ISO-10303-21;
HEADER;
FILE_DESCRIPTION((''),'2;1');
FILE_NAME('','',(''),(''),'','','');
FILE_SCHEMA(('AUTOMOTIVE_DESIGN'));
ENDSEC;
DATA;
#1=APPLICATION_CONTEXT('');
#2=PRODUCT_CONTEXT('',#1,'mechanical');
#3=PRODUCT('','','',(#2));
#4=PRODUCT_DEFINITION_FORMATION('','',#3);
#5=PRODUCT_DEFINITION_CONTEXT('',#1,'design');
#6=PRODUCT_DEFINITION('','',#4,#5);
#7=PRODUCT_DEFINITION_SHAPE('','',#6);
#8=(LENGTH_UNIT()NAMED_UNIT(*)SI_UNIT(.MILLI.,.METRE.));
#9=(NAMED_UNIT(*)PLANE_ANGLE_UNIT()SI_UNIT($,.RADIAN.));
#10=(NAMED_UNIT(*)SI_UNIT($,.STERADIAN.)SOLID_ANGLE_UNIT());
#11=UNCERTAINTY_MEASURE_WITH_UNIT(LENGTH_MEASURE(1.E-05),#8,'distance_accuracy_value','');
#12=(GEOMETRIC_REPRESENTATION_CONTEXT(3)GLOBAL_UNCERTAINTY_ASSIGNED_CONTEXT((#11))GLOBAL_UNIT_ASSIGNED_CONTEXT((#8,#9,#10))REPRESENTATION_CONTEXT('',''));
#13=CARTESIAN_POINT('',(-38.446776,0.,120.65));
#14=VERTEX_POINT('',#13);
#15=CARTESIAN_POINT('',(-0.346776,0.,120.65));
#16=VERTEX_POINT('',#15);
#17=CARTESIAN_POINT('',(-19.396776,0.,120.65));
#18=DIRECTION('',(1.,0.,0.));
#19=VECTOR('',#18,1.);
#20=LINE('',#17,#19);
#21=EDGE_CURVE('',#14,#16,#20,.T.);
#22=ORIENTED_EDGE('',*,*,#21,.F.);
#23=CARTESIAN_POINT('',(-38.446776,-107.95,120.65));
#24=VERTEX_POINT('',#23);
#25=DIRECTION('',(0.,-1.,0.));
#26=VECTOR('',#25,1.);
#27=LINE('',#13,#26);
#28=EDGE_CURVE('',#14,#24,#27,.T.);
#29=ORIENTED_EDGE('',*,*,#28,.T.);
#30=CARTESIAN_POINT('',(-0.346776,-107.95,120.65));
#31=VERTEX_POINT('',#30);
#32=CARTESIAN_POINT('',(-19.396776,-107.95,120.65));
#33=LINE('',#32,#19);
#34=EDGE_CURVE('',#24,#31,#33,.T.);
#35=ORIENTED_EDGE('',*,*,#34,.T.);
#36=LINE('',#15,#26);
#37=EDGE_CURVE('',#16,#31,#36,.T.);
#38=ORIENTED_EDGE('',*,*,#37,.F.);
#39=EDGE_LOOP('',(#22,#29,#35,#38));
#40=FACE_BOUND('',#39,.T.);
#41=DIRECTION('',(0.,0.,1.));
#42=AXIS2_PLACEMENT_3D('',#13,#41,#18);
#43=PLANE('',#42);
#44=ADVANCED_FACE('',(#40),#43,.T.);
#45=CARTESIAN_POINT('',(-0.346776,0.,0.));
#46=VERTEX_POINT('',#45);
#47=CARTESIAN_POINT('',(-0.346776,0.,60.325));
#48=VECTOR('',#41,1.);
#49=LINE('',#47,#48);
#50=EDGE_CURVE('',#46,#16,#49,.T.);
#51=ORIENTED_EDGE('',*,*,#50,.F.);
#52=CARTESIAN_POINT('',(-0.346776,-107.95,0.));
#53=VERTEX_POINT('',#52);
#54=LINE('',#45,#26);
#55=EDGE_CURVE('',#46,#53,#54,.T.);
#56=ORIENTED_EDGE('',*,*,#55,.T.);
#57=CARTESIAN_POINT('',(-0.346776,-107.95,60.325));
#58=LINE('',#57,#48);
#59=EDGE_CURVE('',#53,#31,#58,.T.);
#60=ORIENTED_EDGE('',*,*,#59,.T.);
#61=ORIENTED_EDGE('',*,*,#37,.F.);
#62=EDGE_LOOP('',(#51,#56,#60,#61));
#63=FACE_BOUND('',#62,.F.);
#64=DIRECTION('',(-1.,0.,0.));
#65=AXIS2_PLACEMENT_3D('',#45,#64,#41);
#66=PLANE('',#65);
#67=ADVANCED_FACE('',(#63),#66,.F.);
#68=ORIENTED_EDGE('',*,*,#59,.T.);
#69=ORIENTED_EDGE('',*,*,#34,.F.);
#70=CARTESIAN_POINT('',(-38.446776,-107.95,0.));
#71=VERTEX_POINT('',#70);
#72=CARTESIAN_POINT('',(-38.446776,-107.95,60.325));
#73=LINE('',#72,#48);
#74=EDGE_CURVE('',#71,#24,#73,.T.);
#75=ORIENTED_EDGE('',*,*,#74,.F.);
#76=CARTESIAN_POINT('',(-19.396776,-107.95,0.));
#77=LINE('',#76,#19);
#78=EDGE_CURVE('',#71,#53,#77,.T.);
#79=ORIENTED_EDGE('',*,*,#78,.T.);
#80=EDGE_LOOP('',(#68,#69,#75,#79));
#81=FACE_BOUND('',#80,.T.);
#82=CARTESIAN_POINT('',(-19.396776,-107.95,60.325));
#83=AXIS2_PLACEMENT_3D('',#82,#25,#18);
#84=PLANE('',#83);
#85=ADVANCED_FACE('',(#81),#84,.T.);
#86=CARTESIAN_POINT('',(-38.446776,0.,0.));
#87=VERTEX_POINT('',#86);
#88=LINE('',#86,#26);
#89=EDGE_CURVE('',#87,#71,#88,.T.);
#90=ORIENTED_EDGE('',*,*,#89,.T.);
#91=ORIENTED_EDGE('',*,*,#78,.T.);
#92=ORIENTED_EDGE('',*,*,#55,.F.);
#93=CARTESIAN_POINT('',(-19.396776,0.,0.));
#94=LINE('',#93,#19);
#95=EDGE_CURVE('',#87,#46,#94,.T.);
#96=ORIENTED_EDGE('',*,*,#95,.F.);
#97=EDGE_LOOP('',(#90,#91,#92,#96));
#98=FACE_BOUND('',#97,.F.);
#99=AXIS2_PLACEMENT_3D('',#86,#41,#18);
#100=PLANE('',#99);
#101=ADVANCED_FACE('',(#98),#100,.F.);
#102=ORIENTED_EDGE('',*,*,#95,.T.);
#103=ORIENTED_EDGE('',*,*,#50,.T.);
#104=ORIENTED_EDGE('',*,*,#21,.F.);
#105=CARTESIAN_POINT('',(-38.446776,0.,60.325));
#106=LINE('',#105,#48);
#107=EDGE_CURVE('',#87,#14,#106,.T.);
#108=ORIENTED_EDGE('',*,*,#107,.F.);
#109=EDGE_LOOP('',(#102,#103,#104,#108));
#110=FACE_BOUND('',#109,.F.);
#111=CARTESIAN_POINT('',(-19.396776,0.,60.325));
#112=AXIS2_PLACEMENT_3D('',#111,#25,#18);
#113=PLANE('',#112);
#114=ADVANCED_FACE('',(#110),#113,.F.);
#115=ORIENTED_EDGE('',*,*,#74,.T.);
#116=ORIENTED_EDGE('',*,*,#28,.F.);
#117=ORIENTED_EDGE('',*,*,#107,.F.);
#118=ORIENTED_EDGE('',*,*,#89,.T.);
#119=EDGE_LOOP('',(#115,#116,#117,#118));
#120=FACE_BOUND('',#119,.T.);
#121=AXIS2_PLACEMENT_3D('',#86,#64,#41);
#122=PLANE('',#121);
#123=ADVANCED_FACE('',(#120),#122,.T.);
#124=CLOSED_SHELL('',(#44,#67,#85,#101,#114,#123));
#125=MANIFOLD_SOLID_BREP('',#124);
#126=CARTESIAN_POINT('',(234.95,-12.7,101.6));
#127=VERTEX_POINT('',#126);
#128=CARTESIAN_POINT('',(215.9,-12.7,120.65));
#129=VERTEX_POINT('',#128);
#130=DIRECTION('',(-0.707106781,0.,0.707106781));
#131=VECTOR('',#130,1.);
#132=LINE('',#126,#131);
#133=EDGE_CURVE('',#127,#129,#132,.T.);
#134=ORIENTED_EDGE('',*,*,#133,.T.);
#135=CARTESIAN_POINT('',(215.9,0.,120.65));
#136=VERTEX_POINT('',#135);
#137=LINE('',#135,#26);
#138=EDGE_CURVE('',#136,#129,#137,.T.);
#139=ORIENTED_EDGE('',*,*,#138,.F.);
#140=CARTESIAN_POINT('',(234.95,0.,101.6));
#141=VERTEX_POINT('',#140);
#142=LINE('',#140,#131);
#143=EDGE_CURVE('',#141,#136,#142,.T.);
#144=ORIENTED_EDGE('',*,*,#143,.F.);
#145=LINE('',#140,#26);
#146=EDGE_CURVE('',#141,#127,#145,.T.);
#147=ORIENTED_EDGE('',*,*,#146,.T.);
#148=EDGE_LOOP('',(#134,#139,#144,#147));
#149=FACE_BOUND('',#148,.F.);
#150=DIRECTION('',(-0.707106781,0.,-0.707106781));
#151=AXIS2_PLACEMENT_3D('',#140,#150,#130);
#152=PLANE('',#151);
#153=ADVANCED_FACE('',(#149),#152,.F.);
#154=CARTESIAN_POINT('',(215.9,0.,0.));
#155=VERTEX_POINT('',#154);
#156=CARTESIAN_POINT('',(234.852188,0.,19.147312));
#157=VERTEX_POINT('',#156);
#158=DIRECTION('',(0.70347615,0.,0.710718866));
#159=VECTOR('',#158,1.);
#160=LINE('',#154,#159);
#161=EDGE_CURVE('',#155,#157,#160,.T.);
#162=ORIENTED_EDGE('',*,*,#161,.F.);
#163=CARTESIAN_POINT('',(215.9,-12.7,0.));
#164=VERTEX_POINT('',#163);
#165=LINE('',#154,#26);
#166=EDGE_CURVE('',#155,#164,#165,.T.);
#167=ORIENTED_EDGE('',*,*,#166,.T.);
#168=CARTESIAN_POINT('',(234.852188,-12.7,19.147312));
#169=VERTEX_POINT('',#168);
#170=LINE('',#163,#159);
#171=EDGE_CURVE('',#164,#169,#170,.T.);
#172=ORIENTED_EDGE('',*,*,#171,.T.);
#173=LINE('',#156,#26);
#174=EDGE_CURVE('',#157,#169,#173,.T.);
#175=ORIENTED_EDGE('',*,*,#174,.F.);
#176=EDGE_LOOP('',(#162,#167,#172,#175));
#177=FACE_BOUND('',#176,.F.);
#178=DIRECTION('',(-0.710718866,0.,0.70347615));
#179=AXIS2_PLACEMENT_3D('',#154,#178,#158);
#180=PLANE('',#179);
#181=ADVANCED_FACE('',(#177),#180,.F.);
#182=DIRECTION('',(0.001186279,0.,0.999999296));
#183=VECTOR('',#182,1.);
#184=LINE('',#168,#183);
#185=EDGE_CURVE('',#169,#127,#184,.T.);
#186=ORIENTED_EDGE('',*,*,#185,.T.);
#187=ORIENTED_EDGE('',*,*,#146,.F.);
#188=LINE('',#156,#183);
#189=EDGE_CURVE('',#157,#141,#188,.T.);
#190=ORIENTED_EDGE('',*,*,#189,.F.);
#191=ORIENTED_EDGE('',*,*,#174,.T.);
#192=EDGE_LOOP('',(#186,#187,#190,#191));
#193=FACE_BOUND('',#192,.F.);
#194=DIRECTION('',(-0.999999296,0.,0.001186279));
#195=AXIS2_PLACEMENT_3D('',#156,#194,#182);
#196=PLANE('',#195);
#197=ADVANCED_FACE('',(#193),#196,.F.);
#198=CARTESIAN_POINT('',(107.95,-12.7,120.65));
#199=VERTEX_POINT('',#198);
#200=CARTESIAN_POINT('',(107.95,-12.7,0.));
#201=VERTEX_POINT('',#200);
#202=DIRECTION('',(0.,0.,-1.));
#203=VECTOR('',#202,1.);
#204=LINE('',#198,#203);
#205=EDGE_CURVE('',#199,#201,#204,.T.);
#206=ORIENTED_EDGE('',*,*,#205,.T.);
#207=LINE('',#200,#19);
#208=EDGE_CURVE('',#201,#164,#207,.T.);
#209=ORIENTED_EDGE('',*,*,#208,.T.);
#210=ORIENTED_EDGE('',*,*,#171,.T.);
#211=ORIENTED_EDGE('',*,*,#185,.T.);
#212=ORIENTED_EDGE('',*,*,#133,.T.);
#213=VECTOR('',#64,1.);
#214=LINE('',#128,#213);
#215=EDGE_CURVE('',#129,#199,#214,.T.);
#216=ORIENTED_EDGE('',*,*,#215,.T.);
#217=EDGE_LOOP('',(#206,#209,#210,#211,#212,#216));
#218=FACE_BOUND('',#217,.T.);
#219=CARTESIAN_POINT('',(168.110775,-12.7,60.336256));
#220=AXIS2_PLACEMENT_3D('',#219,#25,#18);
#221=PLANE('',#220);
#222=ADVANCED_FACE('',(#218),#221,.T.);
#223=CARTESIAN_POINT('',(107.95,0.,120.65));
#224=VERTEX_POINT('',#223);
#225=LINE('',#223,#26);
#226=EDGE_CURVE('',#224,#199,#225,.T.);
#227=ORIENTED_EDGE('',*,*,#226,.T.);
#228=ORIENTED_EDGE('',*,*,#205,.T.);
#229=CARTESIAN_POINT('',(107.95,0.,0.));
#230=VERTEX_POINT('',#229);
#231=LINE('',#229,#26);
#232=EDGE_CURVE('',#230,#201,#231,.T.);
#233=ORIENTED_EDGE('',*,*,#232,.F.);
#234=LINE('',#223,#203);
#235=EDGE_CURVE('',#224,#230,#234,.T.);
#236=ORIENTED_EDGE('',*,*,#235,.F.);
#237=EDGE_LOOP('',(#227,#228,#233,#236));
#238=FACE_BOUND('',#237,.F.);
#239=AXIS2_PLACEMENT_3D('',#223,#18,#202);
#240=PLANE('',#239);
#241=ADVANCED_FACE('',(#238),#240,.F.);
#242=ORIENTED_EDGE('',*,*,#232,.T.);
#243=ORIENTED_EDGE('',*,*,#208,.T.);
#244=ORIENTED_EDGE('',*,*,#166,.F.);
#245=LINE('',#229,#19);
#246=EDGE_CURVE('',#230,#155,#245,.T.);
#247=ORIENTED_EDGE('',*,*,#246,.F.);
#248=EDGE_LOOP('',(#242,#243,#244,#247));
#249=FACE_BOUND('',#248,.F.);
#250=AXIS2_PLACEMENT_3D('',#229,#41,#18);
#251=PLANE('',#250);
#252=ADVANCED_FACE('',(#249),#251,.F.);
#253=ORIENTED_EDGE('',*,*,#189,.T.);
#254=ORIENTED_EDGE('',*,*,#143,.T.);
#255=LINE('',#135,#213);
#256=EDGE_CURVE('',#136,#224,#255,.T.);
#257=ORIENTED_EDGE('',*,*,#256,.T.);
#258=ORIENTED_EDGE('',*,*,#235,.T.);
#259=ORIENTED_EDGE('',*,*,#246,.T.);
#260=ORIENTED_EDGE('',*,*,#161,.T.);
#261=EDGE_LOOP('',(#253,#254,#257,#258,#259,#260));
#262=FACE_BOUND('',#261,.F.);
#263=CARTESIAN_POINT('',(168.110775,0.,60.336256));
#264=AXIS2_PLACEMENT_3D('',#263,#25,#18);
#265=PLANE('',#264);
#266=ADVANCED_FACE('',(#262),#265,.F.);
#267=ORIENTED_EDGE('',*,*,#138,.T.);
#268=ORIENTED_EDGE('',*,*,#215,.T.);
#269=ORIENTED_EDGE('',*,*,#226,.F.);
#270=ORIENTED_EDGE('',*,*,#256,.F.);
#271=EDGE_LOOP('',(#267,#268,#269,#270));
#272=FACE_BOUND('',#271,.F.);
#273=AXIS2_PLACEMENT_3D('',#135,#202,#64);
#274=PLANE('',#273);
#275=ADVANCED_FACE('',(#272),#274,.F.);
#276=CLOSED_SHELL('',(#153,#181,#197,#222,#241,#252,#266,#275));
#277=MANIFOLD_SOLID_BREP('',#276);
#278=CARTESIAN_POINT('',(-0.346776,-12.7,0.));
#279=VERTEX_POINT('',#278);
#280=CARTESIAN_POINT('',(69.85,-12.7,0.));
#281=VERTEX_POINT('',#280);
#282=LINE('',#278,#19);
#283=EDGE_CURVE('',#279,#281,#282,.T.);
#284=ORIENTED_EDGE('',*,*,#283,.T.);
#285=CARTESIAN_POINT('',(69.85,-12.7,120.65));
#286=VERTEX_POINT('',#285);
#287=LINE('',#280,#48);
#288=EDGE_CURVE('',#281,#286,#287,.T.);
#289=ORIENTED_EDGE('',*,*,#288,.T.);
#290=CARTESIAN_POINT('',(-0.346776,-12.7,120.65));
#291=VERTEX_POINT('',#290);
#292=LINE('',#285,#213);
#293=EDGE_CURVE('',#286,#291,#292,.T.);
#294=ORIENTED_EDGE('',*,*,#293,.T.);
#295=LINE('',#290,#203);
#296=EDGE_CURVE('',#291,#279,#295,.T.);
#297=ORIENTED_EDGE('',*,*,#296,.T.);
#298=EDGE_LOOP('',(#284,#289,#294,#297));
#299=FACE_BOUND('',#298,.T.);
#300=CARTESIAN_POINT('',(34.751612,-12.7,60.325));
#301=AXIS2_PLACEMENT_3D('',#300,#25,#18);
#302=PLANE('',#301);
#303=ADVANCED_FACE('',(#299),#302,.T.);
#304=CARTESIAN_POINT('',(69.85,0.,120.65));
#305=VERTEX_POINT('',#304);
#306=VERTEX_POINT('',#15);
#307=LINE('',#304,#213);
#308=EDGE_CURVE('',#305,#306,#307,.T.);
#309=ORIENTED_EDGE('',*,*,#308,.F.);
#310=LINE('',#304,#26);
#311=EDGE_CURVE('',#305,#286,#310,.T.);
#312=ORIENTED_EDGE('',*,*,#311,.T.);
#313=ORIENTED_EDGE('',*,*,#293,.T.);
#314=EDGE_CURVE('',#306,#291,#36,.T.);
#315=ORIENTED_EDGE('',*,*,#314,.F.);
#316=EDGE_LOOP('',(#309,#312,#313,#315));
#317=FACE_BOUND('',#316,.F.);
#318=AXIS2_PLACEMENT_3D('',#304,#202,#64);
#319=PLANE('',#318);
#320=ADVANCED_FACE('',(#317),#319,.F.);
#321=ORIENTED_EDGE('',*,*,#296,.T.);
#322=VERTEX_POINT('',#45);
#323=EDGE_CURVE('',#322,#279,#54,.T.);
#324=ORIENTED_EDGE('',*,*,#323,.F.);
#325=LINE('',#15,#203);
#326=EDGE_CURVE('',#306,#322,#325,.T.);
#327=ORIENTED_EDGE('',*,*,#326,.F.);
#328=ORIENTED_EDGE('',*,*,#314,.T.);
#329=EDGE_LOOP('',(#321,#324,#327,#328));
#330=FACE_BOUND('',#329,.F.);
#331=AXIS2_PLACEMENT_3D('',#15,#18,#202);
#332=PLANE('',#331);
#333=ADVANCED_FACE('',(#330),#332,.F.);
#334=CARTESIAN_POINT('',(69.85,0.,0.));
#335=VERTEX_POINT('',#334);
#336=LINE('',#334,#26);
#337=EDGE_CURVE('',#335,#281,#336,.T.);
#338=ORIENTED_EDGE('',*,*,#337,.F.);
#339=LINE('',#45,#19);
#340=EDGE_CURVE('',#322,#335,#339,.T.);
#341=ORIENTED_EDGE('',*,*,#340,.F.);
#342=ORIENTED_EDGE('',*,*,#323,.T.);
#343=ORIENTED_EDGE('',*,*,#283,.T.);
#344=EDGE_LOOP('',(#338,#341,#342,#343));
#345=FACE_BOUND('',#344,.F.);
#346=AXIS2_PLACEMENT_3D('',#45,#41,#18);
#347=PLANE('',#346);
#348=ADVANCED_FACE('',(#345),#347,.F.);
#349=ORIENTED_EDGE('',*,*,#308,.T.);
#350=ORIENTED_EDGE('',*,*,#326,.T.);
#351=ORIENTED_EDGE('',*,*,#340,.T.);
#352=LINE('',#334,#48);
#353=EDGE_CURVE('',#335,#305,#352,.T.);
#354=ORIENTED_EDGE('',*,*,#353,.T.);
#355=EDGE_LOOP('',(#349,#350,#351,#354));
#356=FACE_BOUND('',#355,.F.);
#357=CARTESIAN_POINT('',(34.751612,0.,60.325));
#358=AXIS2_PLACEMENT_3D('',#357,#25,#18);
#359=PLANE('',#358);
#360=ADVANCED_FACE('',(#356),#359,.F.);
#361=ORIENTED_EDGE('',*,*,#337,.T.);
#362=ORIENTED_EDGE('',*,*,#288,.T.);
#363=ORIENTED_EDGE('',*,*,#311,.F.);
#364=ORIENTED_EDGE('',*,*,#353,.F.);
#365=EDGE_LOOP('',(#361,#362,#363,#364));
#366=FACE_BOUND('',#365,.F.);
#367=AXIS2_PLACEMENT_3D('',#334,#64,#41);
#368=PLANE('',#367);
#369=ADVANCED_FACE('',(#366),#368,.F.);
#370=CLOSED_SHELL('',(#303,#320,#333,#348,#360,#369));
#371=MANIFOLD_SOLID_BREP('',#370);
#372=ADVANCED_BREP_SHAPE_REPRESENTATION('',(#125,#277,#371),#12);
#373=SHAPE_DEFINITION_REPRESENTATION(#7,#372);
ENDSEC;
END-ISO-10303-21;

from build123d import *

# Parameters (mm, degrees)
F1_DEPTH = 12.7
F0_W     = 38.1
F0_H     = 120.65
F2_DEPTH = 107.95


# Not quite as in the source:
# - a feature names something its author has since deleted; it is built from what else it names


with BuildPart() as f1:
    # F0 (on Front) → F1 (new body)
    with BuildSketch(Plane.XZ):
        Polygon((-0.3467756933, 0), (0, 0), (69.85, 0), (69.85, 120.65), (-0.3467756933, 120.65), align=None)
    extrude(amount=F1_DEPTH)


with BuildPart() as f1b:
    # F0 (on Front) → F1, piece 2 (new body)
    with BuildSketch(Plane.XZ):
        Polygon((107.95, 120.65), (107.95, 0), (215.9, 0), (234.8521879996, 19.1473123447), (234.95, 101.6), (215.9, 120.65), align=None)
    extrude(amount=F1_DEPTH)


with BuildPart() as f2:
    # F0 (on Front) → F2 (new body)
    with BuildSketch(Plane.XZ):
        with Locations((-19.3967756933, 60.325)):
            Rectangle(F0_W, F0_H)
    extrude(amount=F2_DEPTH)


solid = Compound([f1.part, f1b.part, f2.part])
